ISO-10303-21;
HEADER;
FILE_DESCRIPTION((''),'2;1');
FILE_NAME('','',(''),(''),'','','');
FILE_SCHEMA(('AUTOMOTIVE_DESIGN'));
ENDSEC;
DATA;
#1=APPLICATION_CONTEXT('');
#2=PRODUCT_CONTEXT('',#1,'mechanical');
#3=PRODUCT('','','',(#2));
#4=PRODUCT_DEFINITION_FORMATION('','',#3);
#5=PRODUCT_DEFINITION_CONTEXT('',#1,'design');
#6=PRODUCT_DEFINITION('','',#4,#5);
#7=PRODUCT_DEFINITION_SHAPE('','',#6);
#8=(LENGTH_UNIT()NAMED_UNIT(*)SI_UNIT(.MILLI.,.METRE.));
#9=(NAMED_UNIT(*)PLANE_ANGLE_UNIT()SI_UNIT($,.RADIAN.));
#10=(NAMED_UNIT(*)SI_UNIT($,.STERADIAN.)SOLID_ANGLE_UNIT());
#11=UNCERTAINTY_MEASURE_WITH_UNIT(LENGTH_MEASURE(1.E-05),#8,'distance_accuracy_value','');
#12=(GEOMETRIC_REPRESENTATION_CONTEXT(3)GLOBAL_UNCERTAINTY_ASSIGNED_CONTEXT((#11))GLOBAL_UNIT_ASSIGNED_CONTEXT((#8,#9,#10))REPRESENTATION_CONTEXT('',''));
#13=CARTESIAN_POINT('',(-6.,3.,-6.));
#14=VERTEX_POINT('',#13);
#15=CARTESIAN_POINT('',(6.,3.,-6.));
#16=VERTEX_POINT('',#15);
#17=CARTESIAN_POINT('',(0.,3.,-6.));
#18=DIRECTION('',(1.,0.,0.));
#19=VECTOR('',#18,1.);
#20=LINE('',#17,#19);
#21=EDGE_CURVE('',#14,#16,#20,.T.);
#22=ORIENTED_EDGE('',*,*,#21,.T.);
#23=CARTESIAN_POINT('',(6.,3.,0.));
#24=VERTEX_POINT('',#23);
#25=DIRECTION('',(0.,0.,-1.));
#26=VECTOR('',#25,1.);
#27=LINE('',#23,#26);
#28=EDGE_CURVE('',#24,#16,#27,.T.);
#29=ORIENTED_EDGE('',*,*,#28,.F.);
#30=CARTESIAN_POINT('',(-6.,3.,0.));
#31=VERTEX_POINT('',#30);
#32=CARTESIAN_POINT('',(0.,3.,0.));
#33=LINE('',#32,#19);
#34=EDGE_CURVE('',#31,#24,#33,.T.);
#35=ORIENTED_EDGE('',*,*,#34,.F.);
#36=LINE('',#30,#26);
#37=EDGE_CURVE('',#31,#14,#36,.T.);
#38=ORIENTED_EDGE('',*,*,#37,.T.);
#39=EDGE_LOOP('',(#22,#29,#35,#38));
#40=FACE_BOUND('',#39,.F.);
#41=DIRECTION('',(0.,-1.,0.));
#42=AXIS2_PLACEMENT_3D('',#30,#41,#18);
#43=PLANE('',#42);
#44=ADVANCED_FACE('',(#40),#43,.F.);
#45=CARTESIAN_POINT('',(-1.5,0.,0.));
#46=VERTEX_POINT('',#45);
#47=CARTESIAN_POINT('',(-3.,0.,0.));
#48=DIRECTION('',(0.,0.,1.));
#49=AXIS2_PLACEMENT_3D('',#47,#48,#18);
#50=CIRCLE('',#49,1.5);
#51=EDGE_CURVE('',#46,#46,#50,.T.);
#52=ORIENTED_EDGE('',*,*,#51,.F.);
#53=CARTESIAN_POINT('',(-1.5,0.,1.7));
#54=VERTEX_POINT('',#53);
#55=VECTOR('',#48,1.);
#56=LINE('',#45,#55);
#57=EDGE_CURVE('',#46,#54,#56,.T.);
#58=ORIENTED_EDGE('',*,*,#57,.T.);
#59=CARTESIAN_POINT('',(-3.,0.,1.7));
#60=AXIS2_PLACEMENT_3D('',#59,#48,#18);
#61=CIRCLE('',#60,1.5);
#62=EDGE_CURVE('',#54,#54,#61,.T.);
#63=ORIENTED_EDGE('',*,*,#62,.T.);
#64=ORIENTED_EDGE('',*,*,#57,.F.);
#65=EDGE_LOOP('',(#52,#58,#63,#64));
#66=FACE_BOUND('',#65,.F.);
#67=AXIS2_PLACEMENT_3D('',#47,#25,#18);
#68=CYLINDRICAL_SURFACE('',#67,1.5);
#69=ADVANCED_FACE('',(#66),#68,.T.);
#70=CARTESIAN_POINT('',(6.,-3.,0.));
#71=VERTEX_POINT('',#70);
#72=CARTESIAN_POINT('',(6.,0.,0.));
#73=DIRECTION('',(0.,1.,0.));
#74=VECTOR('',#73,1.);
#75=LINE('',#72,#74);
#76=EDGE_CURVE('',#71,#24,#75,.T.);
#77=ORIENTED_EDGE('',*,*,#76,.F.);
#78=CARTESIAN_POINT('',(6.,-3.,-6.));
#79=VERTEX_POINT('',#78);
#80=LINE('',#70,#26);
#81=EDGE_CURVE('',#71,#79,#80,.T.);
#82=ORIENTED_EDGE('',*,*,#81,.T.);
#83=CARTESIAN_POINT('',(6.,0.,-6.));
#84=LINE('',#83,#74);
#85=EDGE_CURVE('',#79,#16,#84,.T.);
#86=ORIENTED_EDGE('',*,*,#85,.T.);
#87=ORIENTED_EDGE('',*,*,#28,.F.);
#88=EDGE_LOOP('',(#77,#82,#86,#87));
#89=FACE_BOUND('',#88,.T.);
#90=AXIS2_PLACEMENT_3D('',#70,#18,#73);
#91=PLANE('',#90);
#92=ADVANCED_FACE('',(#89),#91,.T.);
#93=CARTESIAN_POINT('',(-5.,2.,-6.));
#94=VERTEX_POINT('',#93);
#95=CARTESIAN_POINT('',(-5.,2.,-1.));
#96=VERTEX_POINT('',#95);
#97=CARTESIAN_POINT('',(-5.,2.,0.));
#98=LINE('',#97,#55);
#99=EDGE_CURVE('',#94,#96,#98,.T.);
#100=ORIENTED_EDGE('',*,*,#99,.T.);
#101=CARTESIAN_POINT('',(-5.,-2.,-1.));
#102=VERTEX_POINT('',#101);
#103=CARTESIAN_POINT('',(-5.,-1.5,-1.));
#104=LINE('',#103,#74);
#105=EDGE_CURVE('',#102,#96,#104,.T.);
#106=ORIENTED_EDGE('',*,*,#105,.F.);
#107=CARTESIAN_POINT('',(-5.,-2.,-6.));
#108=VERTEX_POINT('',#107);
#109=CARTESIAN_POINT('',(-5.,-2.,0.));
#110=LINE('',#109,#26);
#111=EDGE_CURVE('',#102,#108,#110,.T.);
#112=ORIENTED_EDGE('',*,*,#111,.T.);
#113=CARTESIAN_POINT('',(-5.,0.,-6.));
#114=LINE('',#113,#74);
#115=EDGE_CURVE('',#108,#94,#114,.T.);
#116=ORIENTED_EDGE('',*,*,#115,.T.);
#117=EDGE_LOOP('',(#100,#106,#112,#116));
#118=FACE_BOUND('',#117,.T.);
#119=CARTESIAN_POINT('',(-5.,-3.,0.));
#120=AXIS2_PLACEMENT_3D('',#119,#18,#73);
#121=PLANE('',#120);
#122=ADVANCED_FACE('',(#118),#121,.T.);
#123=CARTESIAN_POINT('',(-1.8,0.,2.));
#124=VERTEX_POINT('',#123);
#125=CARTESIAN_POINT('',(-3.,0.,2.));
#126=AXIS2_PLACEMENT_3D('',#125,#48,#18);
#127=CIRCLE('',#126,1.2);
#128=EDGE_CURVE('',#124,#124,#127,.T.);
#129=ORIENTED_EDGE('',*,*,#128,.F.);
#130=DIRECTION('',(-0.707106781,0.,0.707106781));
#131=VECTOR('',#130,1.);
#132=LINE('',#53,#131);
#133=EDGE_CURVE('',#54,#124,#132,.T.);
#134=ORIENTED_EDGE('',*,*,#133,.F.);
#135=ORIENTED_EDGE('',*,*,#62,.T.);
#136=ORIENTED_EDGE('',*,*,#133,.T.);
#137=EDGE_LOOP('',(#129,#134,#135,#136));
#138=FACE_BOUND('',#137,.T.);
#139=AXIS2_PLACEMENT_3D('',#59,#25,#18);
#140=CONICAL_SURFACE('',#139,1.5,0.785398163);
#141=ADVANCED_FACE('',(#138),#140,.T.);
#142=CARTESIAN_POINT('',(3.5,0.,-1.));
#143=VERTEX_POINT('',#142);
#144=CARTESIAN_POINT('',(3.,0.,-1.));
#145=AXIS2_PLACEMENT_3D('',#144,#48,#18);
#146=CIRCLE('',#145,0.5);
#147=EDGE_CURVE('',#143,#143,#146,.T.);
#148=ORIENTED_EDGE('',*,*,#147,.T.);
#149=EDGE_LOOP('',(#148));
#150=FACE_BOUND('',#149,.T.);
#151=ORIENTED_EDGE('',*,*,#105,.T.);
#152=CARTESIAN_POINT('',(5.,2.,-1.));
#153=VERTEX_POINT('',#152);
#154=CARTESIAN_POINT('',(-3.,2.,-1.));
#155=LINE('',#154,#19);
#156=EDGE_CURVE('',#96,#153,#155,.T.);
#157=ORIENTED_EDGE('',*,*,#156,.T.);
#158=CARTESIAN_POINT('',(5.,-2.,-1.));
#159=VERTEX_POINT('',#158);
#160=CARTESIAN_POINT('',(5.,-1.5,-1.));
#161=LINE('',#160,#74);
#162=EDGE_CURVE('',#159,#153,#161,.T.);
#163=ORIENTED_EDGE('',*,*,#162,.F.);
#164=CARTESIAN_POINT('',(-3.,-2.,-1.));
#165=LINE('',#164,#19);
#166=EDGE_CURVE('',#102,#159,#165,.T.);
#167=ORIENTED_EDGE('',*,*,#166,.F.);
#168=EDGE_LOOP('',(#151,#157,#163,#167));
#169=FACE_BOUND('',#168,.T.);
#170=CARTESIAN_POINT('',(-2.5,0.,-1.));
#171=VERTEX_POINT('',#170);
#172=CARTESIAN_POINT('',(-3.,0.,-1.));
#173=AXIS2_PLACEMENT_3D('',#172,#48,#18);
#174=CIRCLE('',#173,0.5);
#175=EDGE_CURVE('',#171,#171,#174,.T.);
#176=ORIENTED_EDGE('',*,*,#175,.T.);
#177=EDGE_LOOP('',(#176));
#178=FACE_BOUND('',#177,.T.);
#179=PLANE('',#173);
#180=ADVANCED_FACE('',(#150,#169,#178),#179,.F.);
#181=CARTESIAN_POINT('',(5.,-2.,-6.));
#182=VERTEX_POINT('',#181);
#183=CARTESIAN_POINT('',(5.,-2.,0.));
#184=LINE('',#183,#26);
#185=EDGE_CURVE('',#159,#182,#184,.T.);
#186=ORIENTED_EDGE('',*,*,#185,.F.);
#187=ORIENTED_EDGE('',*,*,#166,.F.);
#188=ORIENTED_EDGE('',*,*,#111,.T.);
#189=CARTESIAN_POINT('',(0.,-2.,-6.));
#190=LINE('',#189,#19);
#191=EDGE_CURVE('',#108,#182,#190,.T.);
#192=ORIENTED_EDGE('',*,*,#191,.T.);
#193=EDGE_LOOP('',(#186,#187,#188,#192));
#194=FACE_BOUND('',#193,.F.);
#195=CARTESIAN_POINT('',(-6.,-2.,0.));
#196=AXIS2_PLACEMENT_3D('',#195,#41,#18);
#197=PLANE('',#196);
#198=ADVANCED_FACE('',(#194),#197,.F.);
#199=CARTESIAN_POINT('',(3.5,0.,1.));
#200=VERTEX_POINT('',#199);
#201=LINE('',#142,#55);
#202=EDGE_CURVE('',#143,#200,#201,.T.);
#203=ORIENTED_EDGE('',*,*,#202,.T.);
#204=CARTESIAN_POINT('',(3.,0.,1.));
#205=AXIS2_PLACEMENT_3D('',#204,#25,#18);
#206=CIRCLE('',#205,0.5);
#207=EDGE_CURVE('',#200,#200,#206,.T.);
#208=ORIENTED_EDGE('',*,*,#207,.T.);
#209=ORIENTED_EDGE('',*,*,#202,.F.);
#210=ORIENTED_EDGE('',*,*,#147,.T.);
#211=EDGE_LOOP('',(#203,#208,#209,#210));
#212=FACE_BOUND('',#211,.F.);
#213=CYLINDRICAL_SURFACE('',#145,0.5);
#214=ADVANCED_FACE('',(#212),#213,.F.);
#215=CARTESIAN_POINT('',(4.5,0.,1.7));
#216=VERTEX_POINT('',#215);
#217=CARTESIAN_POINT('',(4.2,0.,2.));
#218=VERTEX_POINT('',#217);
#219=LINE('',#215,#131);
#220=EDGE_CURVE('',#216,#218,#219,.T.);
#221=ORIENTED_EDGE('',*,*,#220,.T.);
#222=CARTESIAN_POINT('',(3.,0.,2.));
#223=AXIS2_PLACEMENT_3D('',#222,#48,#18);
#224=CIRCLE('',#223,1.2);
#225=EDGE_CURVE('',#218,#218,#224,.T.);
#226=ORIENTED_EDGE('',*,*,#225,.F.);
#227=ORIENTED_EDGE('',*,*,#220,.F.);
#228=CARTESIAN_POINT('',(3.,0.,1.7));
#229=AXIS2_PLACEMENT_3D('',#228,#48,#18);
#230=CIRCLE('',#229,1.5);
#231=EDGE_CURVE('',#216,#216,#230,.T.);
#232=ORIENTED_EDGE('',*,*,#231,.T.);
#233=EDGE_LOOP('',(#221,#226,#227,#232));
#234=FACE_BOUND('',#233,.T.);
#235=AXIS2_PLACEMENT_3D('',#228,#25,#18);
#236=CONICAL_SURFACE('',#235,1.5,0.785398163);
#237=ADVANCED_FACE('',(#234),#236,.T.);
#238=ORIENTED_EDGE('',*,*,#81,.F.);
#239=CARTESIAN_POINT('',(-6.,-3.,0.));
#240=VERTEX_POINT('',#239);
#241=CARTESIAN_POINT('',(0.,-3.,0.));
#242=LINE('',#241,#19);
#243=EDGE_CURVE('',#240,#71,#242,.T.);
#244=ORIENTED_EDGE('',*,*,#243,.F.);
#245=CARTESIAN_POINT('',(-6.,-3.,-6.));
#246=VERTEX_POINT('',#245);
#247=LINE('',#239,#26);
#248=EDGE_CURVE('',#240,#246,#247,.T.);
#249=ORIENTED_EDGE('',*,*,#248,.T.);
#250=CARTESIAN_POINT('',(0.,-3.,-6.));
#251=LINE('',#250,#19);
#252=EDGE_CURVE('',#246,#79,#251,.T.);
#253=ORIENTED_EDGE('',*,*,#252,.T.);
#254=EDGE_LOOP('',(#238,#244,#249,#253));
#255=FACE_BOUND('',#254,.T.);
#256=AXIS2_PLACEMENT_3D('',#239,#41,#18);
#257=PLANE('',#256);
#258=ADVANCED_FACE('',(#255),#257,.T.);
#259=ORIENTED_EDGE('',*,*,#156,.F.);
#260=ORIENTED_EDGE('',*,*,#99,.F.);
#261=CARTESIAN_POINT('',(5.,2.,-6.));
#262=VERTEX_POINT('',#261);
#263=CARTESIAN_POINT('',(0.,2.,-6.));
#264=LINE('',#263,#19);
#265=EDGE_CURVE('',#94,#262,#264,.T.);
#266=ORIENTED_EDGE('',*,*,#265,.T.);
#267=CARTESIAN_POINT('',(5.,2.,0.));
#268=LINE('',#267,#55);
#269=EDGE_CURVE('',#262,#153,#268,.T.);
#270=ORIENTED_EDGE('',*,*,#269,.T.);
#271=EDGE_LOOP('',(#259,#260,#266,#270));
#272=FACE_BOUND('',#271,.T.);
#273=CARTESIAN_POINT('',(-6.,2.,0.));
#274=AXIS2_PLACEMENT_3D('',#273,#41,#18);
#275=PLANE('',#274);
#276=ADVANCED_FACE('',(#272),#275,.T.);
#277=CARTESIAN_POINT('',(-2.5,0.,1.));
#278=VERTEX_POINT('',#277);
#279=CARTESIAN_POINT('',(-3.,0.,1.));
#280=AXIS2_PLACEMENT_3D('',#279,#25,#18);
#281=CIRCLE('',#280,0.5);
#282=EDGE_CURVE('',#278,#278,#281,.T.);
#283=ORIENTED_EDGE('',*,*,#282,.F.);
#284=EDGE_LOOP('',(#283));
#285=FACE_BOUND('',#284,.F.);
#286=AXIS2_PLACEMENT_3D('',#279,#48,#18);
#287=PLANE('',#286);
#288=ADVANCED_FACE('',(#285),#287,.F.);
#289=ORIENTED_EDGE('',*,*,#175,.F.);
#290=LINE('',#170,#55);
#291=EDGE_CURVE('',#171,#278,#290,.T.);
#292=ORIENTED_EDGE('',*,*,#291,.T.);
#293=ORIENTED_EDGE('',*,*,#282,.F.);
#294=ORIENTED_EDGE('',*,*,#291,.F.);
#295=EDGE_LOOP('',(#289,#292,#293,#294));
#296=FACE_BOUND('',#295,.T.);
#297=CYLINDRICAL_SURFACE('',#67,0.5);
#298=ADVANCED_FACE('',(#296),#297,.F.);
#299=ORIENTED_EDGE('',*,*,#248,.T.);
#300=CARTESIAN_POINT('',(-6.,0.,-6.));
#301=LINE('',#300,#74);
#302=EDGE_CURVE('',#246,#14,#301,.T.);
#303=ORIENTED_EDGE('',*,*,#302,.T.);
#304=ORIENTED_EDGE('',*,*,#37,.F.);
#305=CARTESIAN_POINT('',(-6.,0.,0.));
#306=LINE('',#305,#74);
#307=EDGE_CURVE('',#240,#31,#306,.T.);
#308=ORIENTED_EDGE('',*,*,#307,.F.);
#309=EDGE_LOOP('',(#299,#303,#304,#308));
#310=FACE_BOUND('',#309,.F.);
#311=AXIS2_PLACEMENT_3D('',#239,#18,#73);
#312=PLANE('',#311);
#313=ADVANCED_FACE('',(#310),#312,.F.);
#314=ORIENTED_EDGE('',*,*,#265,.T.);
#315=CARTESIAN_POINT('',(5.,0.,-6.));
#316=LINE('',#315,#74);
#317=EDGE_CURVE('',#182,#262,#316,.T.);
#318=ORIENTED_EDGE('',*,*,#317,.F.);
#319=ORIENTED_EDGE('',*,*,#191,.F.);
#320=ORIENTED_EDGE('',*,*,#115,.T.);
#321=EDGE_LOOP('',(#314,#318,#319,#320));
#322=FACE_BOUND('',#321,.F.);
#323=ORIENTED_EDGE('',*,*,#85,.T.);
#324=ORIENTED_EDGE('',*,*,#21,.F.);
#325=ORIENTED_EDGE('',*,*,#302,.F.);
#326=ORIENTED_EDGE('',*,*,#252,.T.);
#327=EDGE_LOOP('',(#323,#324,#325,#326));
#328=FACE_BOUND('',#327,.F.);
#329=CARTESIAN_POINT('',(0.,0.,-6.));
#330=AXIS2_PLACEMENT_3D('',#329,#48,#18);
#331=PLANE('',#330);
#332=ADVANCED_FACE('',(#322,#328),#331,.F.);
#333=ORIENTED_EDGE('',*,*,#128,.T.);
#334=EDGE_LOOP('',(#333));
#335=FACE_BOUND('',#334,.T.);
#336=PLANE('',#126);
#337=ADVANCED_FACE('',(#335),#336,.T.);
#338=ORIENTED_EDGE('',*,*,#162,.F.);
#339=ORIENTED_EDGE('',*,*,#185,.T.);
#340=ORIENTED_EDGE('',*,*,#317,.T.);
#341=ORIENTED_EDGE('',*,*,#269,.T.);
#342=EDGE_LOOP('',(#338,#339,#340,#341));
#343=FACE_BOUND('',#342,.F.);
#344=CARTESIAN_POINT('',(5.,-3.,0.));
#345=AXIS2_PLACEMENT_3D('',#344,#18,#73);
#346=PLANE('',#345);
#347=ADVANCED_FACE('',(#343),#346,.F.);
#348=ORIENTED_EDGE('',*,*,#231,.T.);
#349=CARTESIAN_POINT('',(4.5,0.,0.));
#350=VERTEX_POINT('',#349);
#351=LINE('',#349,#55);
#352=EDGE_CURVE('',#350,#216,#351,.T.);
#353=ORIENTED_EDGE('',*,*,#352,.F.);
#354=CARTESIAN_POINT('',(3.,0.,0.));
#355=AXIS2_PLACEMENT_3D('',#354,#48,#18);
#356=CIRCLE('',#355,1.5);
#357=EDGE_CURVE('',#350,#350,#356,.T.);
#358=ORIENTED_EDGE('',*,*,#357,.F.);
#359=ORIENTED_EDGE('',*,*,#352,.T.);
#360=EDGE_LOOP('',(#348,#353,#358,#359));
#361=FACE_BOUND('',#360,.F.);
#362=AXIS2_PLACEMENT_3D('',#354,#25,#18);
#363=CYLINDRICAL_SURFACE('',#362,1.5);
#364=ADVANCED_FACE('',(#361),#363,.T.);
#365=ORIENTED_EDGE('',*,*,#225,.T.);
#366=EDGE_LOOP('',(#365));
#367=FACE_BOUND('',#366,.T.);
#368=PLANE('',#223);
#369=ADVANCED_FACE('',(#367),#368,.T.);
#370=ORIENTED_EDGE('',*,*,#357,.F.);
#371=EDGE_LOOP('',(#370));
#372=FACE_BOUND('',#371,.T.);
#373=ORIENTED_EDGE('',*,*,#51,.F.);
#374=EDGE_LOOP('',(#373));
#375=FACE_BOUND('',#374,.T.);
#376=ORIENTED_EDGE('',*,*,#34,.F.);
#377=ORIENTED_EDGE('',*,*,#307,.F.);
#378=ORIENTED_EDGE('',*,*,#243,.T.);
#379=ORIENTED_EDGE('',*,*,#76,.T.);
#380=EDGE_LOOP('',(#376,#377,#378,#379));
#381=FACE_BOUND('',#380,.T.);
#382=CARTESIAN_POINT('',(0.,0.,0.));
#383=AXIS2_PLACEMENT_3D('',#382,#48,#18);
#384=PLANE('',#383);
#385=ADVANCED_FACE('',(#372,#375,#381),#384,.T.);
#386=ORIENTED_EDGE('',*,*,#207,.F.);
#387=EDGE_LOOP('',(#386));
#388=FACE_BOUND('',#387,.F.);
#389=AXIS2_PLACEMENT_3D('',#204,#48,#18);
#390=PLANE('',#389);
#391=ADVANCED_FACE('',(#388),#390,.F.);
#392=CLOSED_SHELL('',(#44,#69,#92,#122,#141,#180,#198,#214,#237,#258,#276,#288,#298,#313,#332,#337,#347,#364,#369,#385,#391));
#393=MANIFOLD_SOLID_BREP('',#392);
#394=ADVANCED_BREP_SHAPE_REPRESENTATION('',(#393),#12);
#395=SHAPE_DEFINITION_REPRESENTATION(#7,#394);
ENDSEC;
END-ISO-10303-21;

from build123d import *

# Parameters (mm, degrees)
F3_W     = 12
F3_H     = 6
F0_DEPTH = 6.0000000522
F1_R     = 1.5
F4_DEPTH = 2
F5_SIZE  = 0.3
F2_T     = 1


# Not quite as in the source:
# - a shell that OpenCascade refuses in one call is made with other operations: the cavity is built on its own and cut out


with BuildPart() as f0:
    # F3 (on Top) → F0 (new body)
    with BuildSketch(Plane.XY):
        Rectangle(F3_W, F3_H)
    extrude(amount=-F0_DEPTH)

    # F1 (on Top) → F4 (join)
    with BuildSketch(Plane.XY):
        with Locations((3, 0)):
            Circle(F1_R)
        with Locations((-3, 0)):
            Circle(F1_R)
    extrude(amount=F4_DEPTH)

    # F5
    f5_edges = [f0.edges().sort_by_distance(p)[0] for p in [
        (-4.5, 0, 2),
        (1.5, 0, 2),
    ]]
    chamfer(f5_edges, length=F5_SIZE)

    # F2: shell of thickness 1, made by hand


with BuildPart() as f2_core1:
    # F2_t2: copy of F0
    add(f0.part)

    # the walls: a layer under each face that stays
    f2_faces = [f2_core1.faces().sort_by_distance(p)[0] for p in [
        (-4.5, 0, 0.85),
        (-4.35, 0, 1.85),
        (0, 0, 0),
        (-3, 0, 2),
        (0, 3, -3.0000000261),
        (6, 0, -3.0000000261),
        (-6, 0, -3.0000000261),
        (0, -3, -3.0000000261),
        (1.5, 0, 0.85),
        (1.65, 0, 1.85),
        (3, 0, 2),
    ]]
    thicken(f2_faces, amount=-F2_T, mode=Mode.SUBTRACT)

    # F2_s3 → F2_t4 (revolve, cut)
    with BuildSketch(Plane.XZ):
        Polygon((-1.49, 0.01), (-2.5, 0), (-2.5, -1), (-1.5, -1), align=None)
    revolve(axis=Axis((-3, 0, 0), (0, 0, 1)), mode=Mode.SUBTRACT)

    # F2_s5 → F2_t6 (revolve, cut)
    with BuildSketch(Plane.XZ):
        Polygon((4.51, 0.01), (4.5, -1), (3.5, -1), (3.5, 0), align=None)
    revolve(axis=Axis((3, 0, 0), (0, 0, 1)), mode=Mode.SUBTRACT)


with BuildPart() as f0_1:
    add(f0.part)

    # what is left inside the walls is the cavity
    f2_cavity = [f2_core1.part.solids().sort_by_distance(p)[0] for p in [
        (0, 1.99, -4.333333),
    ]]
    add(f2_cavity, mode=Mode.SUBTRACT)


solid = f0_1.part
